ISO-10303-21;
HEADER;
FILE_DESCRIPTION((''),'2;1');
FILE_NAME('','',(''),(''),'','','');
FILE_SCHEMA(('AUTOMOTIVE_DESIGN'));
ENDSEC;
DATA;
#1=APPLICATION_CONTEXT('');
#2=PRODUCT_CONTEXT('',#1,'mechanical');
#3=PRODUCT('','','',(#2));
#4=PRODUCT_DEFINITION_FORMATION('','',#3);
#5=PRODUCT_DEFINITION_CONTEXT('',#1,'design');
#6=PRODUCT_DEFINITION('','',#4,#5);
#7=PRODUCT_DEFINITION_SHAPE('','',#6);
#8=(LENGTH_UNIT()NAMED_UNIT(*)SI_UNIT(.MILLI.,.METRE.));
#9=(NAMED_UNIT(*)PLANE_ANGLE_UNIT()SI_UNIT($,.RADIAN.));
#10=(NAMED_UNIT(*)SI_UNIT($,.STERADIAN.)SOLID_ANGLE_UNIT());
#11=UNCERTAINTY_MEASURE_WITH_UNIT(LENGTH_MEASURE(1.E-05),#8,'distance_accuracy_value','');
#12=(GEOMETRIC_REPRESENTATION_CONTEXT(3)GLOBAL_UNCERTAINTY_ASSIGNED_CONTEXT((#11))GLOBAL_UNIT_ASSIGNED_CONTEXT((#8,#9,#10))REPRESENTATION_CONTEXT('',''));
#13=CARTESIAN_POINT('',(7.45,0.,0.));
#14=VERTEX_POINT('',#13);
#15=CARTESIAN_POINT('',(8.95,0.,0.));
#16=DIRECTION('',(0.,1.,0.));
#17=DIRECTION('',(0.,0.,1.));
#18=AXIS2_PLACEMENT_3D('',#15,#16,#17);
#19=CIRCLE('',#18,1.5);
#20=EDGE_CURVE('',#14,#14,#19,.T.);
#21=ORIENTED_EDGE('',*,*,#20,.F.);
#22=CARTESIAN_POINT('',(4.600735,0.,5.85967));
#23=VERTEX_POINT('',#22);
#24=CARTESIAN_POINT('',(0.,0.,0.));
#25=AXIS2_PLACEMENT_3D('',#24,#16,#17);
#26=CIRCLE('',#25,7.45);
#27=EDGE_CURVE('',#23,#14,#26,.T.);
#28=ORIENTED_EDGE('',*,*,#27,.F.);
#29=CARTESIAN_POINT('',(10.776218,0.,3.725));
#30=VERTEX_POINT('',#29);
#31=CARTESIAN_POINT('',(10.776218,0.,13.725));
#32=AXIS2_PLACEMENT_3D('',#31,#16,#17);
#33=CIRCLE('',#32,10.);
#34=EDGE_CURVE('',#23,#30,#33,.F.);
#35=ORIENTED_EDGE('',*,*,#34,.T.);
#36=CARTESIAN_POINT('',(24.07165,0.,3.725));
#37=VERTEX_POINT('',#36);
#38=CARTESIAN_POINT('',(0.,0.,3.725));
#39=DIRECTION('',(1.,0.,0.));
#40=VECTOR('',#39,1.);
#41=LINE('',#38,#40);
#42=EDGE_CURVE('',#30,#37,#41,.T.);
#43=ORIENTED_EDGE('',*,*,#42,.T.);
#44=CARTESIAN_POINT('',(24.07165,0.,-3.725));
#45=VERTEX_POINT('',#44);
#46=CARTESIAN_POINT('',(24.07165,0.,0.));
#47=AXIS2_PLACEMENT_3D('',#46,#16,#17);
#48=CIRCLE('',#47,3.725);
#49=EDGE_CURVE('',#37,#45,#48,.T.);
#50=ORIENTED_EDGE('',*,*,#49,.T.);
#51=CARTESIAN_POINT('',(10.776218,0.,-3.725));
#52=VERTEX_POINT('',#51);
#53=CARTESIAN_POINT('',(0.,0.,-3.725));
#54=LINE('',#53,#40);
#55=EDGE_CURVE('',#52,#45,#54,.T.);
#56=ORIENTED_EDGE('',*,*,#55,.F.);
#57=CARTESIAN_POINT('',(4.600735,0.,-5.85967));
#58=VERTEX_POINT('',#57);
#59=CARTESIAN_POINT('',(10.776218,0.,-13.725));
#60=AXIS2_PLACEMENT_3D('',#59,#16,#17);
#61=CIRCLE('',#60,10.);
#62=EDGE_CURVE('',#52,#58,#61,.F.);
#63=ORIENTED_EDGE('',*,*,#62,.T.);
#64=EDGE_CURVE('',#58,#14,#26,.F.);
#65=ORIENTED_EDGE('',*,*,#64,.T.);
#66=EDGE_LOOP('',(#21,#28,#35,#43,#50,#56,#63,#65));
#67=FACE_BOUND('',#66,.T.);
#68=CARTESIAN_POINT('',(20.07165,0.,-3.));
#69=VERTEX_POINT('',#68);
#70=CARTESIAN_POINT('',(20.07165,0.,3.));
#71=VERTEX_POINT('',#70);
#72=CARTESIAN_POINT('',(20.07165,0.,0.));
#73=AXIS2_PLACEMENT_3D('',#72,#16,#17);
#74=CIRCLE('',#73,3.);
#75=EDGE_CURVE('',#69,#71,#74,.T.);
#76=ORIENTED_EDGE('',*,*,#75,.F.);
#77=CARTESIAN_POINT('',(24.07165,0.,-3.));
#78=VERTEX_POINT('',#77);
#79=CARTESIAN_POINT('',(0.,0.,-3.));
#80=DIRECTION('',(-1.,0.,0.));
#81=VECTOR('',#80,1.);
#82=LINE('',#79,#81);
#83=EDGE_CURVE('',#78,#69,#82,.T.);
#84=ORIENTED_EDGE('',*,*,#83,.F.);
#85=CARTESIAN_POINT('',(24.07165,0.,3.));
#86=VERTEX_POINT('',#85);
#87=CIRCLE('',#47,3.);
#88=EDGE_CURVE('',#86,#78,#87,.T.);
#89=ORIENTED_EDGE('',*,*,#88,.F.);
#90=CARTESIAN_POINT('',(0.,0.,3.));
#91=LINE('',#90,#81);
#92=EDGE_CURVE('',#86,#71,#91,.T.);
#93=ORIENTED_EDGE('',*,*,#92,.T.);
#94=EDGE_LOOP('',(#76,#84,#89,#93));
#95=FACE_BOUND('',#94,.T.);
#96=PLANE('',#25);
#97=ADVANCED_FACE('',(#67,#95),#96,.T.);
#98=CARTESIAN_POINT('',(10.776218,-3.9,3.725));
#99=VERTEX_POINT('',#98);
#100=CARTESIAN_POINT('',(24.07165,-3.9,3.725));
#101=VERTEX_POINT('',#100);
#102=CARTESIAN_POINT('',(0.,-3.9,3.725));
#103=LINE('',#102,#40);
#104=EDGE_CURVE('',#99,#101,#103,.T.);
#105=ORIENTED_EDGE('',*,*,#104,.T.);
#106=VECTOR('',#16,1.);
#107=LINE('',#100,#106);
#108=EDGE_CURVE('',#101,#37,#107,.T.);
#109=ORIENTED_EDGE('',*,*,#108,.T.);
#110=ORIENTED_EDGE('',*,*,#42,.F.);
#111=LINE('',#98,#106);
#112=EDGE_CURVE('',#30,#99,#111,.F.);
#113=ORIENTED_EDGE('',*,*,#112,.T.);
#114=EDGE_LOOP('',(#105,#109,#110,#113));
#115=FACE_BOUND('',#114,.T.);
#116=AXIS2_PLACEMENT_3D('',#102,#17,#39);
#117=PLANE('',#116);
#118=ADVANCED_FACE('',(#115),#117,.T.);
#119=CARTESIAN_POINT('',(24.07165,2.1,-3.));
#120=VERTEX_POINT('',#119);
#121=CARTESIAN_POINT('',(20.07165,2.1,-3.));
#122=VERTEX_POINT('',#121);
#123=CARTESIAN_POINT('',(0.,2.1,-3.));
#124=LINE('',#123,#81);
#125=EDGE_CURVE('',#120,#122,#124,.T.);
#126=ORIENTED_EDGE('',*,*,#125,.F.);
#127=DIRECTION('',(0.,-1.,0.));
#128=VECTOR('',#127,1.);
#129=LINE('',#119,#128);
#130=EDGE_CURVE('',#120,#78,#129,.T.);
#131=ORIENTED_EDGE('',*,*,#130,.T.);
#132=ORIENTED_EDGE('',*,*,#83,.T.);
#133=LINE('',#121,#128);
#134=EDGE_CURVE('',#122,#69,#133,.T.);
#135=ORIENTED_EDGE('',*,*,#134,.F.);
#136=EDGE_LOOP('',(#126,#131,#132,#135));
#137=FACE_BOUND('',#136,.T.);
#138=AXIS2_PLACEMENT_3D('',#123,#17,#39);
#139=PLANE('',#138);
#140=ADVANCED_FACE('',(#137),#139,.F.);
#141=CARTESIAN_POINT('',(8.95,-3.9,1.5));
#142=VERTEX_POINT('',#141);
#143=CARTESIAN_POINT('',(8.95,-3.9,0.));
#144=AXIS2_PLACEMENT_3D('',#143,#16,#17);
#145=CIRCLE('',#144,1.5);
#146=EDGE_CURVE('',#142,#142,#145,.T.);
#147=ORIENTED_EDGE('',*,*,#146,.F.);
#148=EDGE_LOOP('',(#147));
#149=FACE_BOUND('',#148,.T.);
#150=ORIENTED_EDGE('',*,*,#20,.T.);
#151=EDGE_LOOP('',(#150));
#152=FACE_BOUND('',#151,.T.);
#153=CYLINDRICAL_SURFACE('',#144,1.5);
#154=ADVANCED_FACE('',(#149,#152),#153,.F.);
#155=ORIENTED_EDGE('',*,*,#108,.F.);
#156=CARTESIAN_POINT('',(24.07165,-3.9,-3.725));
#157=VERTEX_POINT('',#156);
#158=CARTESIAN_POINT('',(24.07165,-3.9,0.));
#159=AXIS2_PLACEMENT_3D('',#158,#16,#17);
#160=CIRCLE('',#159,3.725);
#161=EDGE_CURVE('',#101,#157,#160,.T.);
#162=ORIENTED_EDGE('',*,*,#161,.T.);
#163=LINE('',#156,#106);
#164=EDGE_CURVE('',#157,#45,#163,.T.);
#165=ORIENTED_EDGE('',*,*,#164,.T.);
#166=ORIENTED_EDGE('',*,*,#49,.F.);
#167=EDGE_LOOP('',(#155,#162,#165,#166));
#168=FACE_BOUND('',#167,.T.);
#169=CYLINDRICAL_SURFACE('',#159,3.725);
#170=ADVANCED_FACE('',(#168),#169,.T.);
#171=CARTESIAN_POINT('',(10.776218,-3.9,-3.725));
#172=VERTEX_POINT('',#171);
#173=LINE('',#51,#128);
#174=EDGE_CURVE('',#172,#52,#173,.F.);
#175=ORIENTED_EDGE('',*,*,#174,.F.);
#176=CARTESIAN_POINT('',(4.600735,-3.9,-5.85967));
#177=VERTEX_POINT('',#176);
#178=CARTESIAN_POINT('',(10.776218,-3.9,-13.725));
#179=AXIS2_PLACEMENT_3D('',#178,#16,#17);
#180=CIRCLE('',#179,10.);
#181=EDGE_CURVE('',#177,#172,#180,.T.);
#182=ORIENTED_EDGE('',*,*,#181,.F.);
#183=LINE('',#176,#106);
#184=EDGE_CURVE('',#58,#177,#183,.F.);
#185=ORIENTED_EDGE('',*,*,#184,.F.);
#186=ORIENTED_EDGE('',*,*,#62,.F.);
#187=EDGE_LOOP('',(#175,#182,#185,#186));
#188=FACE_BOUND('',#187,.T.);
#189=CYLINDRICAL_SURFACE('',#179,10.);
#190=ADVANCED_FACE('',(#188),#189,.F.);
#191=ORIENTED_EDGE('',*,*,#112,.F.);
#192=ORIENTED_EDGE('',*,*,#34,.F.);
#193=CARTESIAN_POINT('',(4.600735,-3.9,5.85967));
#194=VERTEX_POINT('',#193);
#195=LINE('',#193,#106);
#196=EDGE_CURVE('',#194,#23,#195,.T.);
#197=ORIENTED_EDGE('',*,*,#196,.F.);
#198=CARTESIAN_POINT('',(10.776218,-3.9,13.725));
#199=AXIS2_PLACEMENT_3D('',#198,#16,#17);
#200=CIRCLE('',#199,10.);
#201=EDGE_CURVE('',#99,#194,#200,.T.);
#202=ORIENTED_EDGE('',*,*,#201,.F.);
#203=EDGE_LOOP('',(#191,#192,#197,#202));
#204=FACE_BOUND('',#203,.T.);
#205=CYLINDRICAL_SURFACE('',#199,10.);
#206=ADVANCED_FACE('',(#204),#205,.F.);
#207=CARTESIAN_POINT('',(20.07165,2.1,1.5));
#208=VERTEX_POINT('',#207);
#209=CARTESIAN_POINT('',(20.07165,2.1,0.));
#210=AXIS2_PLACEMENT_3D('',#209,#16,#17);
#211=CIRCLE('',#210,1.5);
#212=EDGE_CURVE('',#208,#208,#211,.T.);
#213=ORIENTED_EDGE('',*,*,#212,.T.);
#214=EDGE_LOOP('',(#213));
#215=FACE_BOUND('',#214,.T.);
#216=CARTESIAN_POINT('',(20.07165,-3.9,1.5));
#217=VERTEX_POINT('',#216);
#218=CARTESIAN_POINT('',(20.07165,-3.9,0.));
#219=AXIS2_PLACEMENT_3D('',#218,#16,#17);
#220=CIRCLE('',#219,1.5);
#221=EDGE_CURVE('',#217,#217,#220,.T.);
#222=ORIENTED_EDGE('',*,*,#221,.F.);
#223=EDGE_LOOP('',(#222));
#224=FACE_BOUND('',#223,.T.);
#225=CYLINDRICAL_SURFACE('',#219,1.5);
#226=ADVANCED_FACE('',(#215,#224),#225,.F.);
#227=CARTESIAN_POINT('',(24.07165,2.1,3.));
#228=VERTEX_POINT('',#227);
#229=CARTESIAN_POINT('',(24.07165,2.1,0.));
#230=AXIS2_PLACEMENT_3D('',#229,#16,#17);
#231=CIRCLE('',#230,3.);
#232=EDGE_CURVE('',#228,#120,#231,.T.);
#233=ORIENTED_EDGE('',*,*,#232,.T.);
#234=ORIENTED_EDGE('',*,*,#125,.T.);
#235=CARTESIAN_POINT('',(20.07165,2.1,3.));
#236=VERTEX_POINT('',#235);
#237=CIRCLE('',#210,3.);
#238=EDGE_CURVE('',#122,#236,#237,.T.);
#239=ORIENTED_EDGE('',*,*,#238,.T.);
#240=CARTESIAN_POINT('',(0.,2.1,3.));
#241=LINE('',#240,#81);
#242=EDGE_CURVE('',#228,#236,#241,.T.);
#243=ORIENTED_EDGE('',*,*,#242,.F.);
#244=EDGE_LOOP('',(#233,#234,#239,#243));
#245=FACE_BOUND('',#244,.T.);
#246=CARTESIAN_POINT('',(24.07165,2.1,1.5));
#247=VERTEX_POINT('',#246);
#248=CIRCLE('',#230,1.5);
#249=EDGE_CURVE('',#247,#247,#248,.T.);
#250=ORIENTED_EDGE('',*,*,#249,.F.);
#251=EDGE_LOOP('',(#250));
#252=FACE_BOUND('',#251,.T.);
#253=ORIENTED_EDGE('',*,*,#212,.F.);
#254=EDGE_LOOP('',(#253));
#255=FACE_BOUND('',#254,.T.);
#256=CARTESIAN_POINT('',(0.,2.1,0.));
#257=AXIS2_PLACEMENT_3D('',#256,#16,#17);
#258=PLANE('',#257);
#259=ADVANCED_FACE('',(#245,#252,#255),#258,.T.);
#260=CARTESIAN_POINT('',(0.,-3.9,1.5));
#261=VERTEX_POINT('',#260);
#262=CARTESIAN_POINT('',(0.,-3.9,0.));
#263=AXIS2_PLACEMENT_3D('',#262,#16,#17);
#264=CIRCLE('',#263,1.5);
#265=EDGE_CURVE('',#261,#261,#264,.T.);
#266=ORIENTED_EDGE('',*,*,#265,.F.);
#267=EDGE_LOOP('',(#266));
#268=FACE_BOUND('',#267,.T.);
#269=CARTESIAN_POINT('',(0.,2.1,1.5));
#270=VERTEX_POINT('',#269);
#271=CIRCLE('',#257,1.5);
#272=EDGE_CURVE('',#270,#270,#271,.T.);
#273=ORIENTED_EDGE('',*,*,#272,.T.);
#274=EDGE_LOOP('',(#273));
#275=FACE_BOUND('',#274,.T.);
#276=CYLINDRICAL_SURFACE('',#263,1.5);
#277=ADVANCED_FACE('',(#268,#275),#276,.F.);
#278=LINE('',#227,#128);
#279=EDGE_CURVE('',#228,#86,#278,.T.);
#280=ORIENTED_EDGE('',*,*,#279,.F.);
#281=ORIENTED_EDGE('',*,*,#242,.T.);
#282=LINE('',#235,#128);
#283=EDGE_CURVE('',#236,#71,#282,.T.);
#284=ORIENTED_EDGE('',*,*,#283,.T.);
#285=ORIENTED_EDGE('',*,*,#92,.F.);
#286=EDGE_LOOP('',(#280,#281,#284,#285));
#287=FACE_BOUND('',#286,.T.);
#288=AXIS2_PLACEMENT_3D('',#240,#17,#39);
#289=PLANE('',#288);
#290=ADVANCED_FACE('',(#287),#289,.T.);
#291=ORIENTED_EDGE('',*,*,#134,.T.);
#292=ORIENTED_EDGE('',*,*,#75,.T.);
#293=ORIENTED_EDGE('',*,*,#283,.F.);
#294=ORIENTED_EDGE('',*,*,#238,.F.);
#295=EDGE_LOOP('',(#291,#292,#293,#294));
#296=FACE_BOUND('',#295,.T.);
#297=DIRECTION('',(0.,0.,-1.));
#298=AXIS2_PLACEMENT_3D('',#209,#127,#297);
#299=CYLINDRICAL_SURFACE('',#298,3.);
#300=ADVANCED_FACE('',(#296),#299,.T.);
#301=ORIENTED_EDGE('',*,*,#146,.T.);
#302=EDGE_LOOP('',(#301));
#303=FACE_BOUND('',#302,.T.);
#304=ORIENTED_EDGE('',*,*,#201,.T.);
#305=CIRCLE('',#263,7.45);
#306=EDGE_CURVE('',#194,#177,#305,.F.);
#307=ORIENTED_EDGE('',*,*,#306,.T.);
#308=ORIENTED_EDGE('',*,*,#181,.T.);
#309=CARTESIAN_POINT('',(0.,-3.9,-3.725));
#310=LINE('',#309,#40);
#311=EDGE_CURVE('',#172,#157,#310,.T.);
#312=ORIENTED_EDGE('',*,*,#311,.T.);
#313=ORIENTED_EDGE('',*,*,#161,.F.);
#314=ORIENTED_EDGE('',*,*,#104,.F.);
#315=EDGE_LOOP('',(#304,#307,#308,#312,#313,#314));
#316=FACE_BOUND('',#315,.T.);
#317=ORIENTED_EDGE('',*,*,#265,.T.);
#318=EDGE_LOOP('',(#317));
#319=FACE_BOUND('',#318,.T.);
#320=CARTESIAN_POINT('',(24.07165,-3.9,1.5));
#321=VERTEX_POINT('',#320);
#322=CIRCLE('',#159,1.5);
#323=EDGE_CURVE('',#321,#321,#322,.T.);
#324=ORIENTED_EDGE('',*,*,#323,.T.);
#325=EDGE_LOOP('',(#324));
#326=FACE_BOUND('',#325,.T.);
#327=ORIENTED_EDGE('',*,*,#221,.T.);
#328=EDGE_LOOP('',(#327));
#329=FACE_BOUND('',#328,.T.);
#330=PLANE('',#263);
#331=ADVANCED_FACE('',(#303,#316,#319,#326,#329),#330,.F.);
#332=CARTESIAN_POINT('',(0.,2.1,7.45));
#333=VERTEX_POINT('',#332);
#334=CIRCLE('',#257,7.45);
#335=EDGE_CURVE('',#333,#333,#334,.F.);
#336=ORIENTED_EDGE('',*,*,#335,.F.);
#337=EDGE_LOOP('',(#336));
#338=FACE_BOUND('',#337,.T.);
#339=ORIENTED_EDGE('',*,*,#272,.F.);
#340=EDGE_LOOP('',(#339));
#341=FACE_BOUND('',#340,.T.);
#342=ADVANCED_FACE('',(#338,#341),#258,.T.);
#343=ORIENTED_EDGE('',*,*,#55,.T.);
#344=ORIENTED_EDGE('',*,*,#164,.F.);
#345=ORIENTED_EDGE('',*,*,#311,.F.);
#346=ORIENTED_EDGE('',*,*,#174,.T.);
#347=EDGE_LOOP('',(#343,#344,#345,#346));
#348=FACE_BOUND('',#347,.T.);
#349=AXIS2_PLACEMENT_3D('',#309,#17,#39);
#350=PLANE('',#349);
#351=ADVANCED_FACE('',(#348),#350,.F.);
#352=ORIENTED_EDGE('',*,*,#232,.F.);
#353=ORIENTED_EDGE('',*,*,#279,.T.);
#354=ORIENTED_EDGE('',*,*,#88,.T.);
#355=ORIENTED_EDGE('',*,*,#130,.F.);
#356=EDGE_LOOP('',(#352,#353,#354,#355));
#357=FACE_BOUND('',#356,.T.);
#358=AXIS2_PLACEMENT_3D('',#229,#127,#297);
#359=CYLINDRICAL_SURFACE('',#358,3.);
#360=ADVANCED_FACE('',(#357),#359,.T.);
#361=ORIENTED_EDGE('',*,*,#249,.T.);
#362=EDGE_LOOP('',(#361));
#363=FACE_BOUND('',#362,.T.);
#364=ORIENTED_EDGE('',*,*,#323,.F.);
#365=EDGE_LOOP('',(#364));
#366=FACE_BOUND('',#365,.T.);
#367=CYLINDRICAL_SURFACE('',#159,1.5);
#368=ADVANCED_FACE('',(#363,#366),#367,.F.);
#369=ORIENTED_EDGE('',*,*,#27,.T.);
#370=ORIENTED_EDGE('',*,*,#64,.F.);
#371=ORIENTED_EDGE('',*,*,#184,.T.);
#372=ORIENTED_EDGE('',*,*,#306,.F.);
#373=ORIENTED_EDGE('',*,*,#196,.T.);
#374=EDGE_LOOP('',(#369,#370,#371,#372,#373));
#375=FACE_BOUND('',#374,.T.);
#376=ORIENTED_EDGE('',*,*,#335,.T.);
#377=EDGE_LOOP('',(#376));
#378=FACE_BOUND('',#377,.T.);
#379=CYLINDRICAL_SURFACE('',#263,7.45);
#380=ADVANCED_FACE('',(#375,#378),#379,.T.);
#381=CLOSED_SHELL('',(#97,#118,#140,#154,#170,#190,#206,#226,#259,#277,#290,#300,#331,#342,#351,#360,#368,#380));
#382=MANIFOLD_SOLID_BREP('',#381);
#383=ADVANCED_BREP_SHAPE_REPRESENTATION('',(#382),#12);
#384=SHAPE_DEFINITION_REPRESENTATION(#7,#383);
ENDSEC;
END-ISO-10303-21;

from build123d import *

# Parameters (mm, degrees)
SKETCH1_R           = 1.5
SKETCH1_R_2         = 1.5000000000000007
BOSS_EXTRUDE1_DEPTH = 3.9
BOSS_EXTRUDE2_START = 2.1
SKETCH1_3_R         = 7.449999999999999
SKETCH1_3_R_2       = 1.5
SKETCH1_3_R_3       = 1.5000000000000007
BOSS_EXTRUDE2_DEPTH = 2.1
FILLET1_R           = 10


with BuildPart() as part:
    # Sketch1 → Boss-Extrude1 (new body)
    with BuildSketch(Plane(origin=(0, 0, 0), x_dir=(1, 0, 0), z_dir=(0, 1, 0))):
        with BuildLine():
            ThreePointArc((6.451889258194068, 3.7249999999999996), (-7.45, 1.088e-14), (6.451889258194062, -3.725000000000005))
            Line((6.451889258194065, -3.725), (24.071650299632278, -3.725))
            ThreePointArc((24.071650299632278, -3.7249999999999996), (27.796650299632294, -6.66e-15), (24.071650299632292, 3.7250000000000005))
            Line((24.071650299632292, 3.725), (6.451889258194068, 3.725))
        make_face()
        Circle(SKETCH1_R, mode=Mode.SUBTRACT)
        with Locations((8.95, 3.9e-16)):
            Circle(SKETCH1_R, mode=Mode.SUBTRACT)
        with Locations((20.071650299632296, -8.8e-16)):
            Circle(SKETCH1_R_2, mode=Mode.SUBTRACT)
        with Locations((24.071650299632292, 0)):
            Circle(SKETCH1_R_2, mode=Mode.SUBTRACT)
    extrude(amount=-BOSS_EXTRUDE1_DEPTH)

    # Sketch1<3> → Boss-Extrude2 (add)
    # profile 1 of 2: a face of its own
    with BuildSketch(Plane(origin=(0, 0, 0), x_dir=(1, 0, 0), z_dir=(0, 1, 0)).offset(BOSS_EXTRUDE2_START)):
        Circle(SKETCH1_3_R)
        Circle(SKETCH1_3_R_2, mode=Mode.SUBTRACT)
    # profile 2 of 2: a face of its own
    with BuildSketch(Plane(origin=(0, 0, 0), x_dir=(1, 0, 0), z_dir=(0, 1, 0)).offset(BOSS_EXTRUDE2_START)):
        with BuildLine():
            Line((20.071650299632296, -3.0000000000000013), (24.071650299632292, -3))
            ThreePointArc((24.071650299632292, -3), (27.071650299632292, -1.8e-16), (24.071650299632292, 3))
            Line((24.071650299632292, 3), (20.071650299632296, 3.0000000000000004))
            ThreePointArc((20.071650299632296, 3), (17.071650299632296, -2.6e-16), (20.071650299632296, -3.000000000000001))
        make_face()
        with Locations((20.071650299632296, -8.8e-16)):
            Circle(SKETCH1_3_R_3, mode=Mode.SUBTRACT)
        with Locations((24.071650299632292, 0)):
            Circle(SKETCH1_3_R_3, mode=Mode.SUBTRACT)
    extrude(amount=-BOSS_EXTRUDE2_DEPTH)

    # Fillet1
    fillet1_edges = [part.edges().sort_by_distance(p)[0] for p in [
        (6.451889258194068, -1.95, -3.7249999999999996),
        (6.451889258194063, -1.95, 3.7250000000000023),
    ]]
    fillet(fillet1_edges, radius=FILLET1_R)


solid = part.part
